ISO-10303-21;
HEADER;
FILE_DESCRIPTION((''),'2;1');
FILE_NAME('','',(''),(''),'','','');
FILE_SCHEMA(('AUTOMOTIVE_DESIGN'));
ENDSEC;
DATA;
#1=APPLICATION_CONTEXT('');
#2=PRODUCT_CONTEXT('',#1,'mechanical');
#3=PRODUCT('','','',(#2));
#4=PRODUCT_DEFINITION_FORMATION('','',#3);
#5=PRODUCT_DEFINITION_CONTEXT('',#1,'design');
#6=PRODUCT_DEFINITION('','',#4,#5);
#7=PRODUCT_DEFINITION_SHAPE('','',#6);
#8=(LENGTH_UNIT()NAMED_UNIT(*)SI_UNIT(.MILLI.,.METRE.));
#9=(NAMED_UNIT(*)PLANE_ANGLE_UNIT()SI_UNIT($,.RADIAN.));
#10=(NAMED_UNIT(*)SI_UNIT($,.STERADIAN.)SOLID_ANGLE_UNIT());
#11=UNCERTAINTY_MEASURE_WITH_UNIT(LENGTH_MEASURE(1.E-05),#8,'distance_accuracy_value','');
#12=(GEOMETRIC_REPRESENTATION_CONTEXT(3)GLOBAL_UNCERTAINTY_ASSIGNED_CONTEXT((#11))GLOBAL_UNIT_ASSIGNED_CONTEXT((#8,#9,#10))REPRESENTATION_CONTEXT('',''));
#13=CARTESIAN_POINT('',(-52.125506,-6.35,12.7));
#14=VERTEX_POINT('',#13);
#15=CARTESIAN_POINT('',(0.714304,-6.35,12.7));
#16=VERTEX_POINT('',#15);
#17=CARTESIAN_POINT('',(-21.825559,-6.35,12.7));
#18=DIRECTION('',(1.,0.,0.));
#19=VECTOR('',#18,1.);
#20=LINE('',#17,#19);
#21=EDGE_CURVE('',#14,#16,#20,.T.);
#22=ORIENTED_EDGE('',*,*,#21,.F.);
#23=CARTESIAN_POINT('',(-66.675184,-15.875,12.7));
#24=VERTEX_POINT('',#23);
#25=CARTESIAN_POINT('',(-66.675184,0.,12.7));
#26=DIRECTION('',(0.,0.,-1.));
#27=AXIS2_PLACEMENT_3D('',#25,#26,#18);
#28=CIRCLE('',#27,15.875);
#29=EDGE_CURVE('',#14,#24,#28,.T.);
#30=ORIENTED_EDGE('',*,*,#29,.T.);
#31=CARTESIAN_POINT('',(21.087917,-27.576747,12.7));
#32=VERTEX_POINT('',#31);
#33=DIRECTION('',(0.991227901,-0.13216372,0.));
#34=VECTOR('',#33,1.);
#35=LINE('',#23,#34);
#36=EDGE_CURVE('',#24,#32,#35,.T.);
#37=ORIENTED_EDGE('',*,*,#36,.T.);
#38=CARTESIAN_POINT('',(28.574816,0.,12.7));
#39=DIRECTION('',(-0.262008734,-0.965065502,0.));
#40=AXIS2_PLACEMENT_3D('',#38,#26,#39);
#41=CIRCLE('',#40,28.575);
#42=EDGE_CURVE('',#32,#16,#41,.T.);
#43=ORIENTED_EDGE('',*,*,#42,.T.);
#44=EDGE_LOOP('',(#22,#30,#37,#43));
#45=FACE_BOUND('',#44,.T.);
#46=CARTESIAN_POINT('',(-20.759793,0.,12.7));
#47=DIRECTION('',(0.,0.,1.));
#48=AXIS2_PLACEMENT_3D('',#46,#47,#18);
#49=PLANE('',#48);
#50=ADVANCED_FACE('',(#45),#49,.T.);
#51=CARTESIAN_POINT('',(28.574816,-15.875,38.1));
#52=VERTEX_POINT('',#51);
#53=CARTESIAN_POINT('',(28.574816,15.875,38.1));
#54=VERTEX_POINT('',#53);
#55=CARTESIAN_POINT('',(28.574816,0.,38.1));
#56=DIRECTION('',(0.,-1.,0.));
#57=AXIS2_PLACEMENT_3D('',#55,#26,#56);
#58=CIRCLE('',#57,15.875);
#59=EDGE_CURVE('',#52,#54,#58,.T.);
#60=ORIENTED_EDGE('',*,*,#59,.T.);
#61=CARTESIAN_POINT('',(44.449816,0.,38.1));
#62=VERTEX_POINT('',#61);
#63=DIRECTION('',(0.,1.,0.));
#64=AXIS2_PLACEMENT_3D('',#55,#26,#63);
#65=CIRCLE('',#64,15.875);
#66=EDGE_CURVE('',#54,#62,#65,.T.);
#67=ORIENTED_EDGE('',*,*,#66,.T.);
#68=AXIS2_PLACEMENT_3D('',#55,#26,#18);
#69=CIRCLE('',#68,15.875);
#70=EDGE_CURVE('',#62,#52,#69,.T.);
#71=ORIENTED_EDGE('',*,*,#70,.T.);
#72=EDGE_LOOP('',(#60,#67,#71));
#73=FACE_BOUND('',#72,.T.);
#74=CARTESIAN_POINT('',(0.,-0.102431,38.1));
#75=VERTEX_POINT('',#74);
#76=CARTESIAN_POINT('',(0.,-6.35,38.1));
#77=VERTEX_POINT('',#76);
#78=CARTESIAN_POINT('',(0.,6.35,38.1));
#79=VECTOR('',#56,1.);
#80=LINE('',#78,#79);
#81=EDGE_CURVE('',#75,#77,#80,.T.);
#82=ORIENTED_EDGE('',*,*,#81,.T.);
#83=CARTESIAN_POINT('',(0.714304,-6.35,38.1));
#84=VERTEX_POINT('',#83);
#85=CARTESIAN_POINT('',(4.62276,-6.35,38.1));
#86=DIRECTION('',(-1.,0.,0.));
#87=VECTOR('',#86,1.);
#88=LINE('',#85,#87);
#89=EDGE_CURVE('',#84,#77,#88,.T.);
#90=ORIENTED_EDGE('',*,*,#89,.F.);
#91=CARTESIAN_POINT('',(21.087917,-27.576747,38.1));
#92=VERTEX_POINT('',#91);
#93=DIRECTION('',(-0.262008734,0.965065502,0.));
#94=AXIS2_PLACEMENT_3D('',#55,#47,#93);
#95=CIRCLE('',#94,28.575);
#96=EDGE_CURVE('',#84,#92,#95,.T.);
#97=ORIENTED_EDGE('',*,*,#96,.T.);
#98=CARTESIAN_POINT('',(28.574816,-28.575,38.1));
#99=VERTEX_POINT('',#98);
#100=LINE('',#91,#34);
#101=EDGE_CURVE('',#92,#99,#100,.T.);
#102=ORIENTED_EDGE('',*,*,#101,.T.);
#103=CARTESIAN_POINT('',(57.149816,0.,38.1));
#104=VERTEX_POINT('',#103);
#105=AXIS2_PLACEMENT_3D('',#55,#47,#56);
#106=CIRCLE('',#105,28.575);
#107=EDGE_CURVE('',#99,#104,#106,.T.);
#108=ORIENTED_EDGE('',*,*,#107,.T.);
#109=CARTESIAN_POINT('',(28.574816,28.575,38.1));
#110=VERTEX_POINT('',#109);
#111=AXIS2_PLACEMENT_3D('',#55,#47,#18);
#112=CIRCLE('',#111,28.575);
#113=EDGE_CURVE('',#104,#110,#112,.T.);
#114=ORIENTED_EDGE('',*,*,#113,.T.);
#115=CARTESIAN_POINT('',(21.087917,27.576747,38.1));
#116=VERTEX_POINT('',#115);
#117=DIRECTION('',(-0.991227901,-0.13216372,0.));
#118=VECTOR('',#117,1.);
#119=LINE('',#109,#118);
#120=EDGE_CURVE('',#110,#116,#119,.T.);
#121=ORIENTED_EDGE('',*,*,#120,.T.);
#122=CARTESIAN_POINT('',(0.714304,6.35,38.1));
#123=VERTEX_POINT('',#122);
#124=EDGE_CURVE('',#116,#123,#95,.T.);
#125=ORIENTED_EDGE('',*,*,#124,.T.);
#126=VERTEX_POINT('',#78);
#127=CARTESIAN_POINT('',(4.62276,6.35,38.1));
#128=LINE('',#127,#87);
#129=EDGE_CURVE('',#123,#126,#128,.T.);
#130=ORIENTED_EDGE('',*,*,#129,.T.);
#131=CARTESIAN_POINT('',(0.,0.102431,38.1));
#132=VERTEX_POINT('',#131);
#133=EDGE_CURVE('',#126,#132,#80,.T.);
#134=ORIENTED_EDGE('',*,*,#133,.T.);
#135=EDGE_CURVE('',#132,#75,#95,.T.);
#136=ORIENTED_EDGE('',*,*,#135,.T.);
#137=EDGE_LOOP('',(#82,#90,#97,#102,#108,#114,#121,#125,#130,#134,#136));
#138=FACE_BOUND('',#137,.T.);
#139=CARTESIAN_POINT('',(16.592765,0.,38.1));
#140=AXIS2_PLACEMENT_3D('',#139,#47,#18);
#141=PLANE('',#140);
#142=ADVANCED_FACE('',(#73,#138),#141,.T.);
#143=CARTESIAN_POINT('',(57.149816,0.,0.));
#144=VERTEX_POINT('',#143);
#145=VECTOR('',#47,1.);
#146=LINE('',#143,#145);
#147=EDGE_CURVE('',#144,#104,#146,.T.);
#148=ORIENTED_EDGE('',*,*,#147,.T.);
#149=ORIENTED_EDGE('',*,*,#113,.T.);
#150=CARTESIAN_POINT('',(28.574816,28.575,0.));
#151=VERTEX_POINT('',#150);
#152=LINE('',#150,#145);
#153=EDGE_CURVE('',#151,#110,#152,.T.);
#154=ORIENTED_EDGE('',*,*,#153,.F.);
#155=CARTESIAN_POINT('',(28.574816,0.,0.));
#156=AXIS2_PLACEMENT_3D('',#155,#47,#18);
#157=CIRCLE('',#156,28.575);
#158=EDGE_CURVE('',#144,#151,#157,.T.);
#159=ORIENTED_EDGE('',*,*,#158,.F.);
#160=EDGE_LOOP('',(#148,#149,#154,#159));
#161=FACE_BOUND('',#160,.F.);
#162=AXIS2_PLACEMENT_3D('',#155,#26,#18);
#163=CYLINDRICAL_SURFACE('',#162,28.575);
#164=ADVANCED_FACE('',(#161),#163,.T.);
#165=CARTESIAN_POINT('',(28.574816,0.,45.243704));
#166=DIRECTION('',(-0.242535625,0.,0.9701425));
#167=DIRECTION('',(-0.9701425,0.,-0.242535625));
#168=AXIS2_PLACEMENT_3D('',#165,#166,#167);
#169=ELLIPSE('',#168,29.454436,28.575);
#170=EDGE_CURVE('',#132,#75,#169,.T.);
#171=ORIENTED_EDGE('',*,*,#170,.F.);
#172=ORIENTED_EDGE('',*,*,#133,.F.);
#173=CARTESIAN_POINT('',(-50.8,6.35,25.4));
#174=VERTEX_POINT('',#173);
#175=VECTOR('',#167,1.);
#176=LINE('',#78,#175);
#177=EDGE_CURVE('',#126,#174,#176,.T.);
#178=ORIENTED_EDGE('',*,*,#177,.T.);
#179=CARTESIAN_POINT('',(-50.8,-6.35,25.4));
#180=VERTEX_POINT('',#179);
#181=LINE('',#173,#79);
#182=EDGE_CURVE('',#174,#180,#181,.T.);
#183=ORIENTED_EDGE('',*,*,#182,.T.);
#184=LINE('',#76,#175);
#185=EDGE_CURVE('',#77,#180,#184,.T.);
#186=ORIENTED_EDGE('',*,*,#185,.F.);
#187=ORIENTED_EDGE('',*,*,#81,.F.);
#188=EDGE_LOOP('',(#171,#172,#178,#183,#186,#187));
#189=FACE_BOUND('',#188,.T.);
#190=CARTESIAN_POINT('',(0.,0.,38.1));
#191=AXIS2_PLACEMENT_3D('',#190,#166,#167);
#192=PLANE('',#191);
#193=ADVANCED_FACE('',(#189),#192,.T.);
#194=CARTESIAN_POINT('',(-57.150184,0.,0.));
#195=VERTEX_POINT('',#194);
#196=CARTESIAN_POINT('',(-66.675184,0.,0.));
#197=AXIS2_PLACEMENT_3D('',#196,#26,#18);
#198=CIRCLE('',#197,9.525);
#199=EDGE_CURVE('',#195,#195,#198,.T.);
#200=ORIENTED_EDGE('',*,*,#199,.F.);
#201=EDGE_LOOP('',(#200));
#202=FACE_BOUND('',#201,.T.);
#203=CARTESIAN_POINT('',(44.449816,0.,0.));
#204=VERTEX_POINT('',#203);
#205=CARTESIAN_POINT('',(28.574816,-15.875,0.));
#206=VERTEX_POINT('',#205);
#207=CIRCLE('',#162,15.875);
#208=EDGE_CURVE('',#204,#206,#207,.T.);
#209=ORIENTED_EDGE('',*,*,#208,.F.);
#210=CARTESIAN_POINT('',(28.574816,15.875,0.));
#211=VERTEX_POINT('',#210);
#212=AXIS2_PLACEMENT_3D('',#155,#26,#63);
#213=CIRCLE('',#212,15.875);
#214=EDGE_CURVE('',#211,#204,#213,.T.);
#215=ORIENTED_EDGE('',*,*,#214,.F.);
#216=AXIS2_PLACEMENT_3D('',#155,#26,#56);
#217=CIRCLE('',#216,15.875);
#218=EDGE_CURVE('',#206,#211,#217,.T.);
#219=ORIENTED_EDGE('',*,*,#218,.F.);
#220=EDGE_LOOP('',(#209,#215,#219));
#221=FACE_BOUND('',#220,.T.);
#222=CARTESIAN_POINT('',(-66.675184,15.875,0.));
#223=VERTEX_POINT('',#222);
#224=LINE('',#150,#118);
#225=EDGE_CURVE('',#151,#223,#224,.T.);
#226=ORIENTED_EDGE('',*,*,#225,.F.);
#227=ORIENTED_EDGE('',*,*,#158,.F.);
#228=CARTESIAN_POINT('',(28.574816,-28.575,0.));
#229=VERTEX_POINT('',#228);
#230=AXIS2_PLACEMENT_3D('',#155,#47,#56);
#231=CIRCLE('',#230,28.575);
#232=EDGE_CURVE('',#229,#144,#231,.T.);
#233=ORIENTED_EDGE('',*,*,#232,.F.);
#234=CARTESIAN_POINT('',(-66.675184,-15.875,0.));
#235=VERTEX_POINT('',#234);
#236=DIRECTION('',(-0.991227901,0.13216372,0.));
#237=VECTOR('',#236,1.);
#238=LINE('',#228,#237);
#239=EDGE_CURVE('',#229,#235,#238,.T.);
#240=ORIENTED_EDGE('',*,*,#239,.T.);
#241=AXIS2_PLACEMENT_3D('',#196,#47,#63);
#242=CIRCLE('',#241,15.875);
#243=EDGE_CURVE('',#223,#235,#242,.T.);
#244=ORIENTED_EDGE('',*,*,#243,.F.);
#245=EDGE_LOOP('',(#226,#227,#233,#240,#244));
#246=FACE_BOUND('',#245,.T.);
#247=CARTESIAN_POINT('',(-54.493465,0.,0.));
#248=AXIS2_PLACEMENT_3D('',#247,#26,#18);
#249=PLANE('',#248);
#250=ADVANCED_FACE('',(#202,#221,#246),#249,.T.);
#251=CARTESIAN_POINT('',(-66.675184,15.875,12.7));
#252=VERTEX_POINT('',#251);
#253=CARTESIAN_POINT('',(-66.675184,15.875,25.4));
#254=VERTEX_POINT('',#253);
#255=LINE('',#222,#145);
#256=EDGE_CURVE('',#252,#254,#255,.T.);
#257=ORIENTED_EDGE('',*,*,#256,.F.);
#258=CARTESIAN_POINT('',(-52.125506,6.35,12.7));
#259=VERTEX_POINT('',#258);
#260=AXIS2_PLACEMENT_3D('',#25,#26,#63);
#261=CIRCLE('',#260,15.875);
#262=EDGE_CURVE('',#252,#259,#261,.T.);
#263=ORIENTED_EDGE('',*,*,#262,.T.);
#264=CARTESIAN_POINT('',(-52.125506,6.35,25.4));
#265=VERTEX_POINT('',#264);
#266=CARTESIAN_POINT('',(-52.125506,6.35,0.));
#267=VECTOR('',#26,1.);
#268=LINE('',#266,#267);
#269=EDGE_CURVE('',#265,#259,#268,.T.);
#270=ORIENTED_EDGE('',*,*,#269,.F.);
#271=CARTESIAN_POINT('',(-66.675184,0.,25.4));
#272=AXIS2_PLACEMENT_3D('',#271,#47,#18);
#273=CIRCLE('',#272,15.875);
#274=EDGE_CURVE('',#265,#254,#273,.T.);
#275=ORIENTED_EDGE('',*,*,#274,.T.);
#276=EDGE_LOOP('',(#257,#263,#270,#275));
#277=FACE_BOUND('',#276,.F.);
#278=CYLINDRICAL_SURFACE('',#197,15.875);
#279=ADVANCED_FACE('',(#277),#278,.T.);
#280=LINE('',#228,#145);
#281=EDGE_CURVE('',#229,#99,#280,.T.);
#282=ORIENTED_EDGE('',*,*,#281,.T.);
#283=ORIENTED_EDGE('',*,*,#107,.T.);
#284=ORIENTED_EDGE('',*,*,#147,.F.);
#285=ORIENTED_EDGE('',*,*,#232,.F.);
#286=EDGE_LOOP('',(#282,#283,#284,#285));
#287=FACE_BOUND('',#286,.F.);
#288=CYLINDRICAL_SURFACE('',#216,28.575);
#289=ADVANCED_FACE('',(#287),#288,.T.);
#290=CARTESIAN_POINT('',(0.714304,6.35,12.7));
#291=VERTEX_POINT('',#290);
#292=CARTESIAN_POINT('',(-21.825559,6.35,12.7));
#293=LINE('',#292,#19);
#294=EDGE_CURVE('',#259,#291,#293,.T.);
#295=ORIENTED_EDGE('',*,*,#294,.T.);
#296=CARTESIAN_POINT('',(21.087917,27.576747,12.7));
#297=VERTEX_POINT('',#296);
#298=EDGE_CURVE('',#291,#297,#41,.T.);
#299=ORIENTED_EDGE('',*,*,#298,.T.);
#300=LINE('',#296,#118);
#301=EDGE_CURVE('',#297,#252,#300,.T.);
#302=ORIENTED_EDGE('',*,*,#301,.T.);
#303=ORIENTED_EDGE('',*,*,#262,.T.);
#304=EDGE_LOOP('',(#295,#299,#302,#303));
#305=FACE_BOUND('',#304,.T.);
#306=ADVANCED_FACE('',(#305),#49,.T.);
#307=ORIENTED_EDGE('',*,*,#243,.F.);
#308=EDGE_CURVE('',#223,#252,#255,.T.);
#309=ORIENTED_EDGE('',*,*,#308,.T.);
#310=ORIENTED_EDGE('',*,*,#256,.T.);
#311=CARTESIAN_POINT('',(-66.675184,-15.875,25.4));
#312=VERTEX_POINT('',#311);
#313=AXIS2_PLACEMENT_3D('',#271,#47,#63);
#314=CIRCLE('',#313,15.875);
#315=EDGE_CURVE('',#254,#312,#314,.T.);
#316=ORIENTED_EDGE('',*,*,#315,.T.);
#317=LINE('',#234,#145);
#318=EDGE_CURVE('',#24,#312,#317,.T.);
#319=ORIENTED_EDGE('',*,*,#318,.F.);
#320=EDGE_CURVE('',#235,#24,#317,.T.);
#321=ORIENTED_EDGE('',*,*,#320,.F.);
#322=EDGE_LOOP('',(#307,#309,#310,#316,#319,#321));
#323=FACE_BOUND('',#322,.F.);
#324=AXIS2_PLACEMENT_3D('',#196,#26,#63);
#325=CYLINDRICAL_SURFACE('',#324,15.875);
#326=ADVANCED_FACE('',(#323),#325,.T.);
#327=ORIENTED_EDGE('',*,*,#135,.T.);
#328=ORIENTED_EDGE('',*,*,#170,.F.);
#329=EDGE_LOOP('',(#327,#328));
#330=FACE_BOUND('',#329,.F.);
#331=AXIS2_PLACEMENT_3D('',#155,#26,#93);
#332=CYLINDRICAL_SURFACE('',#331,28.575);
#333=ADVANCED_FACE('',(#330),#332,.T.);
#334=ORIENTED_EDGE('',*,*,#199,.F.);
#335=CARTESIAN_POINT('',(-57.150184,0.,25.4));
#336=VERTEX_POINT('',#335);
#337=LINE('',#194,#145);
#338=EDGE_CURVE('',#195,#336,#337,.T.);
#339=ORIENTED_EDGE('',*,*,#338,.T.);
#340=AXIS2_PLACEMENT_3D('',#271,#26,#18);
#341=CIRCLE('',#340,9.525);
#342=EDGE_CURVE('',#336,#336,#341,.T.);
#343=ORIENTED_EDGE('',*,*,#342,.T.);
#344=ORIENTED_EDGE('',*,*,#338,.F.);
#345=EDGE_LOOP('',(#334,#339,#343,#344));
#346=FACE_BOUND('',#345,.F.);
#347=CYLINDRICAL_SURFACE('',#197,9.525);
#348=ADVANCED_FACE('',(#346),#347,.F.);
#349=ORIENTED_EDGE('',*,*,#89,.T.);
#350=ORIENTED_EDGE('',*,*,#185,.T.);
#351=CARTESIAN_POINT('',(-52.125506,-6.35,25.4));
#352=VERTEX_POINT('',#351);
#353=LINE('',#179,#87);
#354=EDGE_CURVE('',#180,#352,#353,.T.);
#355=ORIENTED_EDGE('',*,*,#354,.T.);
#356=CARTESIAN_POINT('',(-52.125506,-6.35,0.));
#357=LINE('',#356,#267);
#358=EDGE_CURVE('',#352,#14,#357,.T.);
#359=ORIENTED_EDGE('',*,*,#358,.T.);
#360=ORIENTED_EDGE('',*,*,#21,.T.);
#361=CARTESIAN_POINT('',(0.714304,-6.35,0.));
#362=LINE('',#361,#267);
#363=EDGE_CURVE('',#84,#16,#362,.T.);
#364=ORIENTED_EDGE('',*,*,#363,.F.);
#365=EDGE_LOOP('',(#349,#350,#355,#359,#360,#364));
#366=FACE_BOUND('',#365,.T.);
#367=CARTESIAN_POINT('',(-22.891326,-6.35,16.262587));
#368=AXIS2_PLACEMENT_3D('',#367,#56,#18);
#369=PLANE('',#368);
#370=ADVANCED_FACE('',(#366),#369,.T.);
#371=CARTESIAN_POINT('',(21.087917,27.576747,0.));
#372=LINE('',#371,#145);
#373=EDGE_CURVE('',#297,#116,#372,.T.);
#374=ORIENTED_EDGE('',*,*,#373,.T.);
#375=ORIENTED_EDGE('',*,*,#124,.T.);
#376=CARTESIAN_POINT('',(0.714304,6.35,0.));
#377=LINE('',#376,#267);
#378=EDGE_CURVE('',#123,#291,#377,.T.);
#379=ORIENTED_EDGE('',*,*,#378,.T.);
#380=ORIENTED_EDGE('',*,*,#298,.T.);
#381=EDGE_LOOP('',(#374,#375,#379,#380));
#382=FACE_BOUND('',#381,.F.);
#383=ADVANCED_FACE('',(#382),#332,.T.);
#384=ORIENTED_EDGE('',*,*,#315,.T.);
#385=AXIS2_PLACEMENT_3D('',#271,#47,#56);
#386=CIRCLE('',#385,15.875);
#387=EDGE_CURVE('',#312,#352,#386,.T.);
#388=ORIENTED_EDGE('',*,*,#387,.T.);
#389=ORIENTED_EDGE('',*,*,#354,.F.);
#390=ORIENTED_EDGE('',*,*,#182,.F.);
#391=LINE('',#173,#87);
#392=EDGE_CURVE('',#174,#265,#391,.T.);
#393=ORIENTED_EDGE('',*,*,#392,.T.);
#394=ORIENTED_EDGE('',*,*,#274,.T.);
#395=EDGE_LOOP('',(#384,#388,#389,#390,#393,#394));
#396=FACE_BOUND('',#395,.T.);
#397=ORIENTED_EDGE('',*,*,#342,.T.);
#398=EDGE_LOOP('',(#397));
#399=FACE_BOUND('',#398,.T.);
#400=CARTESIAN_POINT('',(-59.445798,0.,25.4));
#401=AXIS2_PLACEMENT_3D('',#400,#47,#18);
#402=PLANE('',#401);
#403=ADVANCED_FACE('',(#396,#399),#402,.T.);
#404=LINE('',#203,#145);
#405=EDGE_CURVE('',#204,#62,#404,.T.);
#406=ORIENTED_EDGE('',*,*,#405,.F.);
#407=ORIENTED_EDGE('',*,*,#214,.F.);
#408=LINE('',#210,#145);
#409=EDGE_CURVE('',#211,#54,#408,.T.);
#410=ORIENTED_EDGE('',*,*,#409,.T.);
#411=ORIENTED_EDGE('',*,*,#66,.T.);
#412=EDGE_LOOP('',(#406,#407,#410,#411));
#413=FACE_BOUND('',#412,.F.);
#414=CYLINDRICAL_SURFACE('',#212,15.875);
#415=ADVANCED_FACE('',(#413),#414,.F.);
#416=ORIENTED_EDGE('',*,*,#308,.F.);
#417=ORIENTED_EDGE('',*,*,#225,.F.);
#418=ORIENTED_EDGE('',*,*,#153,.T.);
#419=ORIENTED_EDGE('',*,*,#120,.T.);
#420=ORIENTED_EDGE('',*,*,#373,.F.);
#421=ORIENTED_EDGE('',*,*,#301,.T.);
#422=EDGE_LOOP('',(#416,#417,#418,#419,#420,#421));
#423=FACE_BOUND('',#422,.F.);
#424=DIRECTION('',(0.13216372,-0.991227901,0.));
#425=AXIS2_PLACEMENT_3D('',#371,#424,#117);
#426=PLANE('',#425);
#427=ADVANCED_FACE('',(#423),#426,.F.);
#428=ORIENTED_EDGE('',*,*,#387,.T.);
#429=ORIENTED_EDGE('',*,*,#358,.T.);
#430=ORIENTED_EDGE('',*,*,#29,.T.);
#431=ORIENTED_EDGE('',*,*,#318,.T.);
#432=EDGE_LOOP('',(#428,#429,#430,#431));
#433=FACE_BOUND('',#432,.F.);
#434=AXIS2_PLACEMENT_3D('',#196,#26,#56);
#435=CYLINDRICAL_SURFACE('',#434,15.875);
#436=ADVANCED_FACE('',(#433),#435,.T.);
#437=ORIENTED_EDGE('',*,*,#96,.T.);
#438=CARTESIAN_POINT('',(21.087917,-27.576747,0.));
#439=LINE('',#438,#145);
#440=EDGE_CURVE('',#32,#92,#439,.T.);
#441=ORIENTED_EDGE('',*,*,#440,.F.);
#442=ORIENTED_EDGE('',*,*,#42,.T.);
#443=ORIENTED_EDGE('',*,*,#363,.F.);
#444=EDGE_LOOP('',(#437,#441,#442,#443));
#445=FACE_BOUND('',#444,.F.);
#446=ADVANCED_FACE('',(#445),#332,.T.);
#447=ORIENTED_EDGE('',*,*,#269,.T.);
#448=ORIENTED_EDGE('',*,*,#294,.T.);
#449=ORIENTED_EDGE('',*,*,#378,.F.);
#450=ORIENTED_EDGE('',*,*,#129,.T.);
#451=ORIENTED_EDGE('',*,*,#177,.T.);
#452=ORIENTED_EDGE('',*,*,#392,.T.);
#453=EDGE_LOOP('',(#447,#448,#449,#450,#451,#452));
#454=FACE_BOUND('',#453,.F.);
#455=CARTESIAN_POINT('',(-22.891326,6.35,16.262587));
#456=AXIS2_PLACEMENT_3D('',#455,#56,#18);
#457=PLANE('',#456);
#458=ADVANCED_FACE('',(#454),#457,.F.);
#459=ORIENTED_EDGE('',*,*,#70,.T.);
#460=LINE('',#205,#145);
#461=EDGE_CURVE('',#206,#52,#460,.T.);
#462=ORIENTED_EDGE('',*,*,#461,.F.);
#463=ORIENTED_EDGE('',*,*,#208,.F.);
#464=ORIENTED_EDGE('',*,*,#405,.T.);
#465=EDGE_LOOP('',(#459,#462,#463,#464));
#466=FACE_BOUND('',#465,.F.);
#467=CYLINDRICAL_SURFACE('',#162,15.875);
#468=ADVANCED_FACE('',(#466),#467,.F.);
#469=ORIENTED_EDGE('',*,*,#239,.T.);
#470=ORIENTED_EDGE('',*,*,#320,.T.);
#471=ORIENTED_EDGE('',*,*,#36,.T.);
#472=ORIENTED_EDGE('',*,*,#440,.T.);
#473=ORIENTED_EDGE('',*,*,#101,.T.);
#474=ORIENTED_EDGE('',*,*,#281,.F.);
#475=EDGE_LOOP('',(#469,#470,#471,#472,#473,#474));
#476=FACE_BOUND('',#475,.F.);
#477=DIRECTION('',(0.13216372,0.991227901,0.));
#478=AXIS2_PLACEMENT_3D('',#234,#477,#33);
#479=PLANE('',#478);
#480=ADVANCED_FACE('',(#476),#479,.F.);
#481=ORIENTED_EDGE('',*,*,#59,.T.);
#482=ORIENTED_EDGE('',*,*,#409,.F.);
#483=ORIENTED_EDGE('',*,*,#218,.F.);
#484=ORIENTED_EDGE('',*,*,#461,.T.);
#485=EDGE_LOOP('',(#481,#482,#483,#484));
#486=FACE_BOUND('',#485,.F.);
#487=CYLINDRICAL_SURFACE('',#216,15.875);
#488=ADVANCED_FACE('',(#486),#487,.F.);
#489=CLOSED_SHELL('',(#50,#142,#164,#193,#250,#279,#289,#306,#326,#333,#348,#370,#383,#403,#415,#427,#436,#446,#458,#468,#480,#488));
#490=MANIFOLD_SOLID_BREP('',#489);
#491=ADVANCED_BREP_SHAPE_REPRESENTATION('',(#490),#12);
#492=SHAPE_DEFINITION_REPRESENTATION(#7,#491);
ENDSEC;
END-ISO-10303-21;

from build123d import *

# Parameters (mm, degrees)
F1_DEPTH = 25.4
F2_DEPTH = 38.1
F3_DEPTH = 12.7
F5_DEPTH = 6.35


with BuildPart() as f1:
    # F0 (on Top) → F1 (new body)
    with BuildSketch(Plane.XY):
        with BuildLine():
            ThreePointArc((-50.8001835883, 0), (-55.449863437, 11.2253201513), (-66.6751835883, 15.875))
            Line((-66.6751835883, 15.875), (-66.6751835883, 9.525))
            ThreePointArc((-66.6751835883, 9.525), (-59.9399914975, 6.7351920908), (-57.1501835883, 0))
            ThreePointArc((-57.1501835883, 0), (-59.9399914975, -6.7351920908), (-66.6751835883, -9.525))
            Line((-66.6751835883, -9.525), (-66.6751835883, -15.875))
            ThreePointArc((-66.6751835883, -15.875), (-55.449863437, -11.2253201513), (-50.8001835883, 0))
        make_face()
        with BuildLine():
            Line((-66.6751835883, 9.525), (-66.6751835883, 15.875))
            ThreePointArc((-66.6751835883, 15.875), (-82.5501835883, 0), (-66.6751835883, -15.875))
            Line((-66.6751835883, -15.875), (-66.6751835883, -9.525))
            ThreePointArc((-66.6751835883, -9.525), (-76.2001835883, 0), (-66.6751835883, 9.525))
        make_face()
    extrude(amount=F1_DEPTH)



with BuildPart() as f2:
    # F0 (on Top) → F2 (new body)
    with BuildSketch(Plane.XY):
        with BuildLine():
            ThreePointArc((28.5748164117, -15.875), (12.6998164117, 0), (28.5748164117, 15.875))
            Line((28.5748164117, 15.875), (28.5748164117, 28.575))
            Line((28.5748164117, 28.575), (21.0879168484, 27.5767467249))
            ThreePointArc((21.0879168484, 27.5767467249), (-0.0001835883, 0), (21.0879168484, -27.5767467249))
            Line((21.0879168484, -27.5767467249), (28.5748164117, -28.575))
            Line((28.5748164117, -28.575), (28.5748164117, -15.875))
        make_face()
        with BuildLine():
            ThreePointArc((28.5748164117, 15.875), (39.800136563, 11.2253201513), (44.4498164117, 0))
            ThreePointArc((44.4498164117, 0), (39.800136563, -11.2253201513), (28.5748164117, -15.875))
            Line((28.5748164117, -15.875), (28.5748164117, -28.575))
            ThreePointArc((28.5748164117, -28.575), (48.7803926841, -20.2055762724), (57.1498164117, 0))
            ThreePointArc((57.1498164117, 0), (48.7803926841, 20.2055762724), (28.5748164117, 28.575))
            Line((28.5748164117, 28.575), (28.5748164117, 15.875))
        make_face()
    extrude(amount=F2_DEPTH)


with BuildPart() as f1_1:
    add(f1.part)

    add(f2.part)  # F3 merges F2
    # F0 (on Top) → F3 (join)
    with BuildSketch(Plane.XY):
        with BuildLine():
            ThreePointArc((21.0879168484, -27.5767467249), (-0.0001835883, 0), (21.0879168484, 27.5767467249))
            Line((21.0879168484, 27.5767467249), (-66.6751835883, 15.875))
            ThreePointArc((-66.6751835883, 15.875), (-55.449863437, 11.2253201513), (-50.8001835883, 0))
            ThreePointArc((-50.8001835883, 0), (-55.449863437, -11.2253201513), (-66.6751835883, -15.875))
            Line((-66.6751835883, -15.875), (21.0879168484, -27.5767467249))
        make_face()
    extrude(amount=F3_DEPTH)

    # F4 (on Front) → F5 (join, symmetric)
    with BuildSketch(Plane.XZ):
        Polygon((-50.8, 0), (0, 0), (4.6227602288, 0), (4.6227602288, 38.1), (0, 38.1), (-50.8, 25.4), (-54.4934645295, 25.4), (-54.4934645295, 0), align=None)
    extrude(amount=F5_DEPTH, both=True)


solid = f1_1.part
